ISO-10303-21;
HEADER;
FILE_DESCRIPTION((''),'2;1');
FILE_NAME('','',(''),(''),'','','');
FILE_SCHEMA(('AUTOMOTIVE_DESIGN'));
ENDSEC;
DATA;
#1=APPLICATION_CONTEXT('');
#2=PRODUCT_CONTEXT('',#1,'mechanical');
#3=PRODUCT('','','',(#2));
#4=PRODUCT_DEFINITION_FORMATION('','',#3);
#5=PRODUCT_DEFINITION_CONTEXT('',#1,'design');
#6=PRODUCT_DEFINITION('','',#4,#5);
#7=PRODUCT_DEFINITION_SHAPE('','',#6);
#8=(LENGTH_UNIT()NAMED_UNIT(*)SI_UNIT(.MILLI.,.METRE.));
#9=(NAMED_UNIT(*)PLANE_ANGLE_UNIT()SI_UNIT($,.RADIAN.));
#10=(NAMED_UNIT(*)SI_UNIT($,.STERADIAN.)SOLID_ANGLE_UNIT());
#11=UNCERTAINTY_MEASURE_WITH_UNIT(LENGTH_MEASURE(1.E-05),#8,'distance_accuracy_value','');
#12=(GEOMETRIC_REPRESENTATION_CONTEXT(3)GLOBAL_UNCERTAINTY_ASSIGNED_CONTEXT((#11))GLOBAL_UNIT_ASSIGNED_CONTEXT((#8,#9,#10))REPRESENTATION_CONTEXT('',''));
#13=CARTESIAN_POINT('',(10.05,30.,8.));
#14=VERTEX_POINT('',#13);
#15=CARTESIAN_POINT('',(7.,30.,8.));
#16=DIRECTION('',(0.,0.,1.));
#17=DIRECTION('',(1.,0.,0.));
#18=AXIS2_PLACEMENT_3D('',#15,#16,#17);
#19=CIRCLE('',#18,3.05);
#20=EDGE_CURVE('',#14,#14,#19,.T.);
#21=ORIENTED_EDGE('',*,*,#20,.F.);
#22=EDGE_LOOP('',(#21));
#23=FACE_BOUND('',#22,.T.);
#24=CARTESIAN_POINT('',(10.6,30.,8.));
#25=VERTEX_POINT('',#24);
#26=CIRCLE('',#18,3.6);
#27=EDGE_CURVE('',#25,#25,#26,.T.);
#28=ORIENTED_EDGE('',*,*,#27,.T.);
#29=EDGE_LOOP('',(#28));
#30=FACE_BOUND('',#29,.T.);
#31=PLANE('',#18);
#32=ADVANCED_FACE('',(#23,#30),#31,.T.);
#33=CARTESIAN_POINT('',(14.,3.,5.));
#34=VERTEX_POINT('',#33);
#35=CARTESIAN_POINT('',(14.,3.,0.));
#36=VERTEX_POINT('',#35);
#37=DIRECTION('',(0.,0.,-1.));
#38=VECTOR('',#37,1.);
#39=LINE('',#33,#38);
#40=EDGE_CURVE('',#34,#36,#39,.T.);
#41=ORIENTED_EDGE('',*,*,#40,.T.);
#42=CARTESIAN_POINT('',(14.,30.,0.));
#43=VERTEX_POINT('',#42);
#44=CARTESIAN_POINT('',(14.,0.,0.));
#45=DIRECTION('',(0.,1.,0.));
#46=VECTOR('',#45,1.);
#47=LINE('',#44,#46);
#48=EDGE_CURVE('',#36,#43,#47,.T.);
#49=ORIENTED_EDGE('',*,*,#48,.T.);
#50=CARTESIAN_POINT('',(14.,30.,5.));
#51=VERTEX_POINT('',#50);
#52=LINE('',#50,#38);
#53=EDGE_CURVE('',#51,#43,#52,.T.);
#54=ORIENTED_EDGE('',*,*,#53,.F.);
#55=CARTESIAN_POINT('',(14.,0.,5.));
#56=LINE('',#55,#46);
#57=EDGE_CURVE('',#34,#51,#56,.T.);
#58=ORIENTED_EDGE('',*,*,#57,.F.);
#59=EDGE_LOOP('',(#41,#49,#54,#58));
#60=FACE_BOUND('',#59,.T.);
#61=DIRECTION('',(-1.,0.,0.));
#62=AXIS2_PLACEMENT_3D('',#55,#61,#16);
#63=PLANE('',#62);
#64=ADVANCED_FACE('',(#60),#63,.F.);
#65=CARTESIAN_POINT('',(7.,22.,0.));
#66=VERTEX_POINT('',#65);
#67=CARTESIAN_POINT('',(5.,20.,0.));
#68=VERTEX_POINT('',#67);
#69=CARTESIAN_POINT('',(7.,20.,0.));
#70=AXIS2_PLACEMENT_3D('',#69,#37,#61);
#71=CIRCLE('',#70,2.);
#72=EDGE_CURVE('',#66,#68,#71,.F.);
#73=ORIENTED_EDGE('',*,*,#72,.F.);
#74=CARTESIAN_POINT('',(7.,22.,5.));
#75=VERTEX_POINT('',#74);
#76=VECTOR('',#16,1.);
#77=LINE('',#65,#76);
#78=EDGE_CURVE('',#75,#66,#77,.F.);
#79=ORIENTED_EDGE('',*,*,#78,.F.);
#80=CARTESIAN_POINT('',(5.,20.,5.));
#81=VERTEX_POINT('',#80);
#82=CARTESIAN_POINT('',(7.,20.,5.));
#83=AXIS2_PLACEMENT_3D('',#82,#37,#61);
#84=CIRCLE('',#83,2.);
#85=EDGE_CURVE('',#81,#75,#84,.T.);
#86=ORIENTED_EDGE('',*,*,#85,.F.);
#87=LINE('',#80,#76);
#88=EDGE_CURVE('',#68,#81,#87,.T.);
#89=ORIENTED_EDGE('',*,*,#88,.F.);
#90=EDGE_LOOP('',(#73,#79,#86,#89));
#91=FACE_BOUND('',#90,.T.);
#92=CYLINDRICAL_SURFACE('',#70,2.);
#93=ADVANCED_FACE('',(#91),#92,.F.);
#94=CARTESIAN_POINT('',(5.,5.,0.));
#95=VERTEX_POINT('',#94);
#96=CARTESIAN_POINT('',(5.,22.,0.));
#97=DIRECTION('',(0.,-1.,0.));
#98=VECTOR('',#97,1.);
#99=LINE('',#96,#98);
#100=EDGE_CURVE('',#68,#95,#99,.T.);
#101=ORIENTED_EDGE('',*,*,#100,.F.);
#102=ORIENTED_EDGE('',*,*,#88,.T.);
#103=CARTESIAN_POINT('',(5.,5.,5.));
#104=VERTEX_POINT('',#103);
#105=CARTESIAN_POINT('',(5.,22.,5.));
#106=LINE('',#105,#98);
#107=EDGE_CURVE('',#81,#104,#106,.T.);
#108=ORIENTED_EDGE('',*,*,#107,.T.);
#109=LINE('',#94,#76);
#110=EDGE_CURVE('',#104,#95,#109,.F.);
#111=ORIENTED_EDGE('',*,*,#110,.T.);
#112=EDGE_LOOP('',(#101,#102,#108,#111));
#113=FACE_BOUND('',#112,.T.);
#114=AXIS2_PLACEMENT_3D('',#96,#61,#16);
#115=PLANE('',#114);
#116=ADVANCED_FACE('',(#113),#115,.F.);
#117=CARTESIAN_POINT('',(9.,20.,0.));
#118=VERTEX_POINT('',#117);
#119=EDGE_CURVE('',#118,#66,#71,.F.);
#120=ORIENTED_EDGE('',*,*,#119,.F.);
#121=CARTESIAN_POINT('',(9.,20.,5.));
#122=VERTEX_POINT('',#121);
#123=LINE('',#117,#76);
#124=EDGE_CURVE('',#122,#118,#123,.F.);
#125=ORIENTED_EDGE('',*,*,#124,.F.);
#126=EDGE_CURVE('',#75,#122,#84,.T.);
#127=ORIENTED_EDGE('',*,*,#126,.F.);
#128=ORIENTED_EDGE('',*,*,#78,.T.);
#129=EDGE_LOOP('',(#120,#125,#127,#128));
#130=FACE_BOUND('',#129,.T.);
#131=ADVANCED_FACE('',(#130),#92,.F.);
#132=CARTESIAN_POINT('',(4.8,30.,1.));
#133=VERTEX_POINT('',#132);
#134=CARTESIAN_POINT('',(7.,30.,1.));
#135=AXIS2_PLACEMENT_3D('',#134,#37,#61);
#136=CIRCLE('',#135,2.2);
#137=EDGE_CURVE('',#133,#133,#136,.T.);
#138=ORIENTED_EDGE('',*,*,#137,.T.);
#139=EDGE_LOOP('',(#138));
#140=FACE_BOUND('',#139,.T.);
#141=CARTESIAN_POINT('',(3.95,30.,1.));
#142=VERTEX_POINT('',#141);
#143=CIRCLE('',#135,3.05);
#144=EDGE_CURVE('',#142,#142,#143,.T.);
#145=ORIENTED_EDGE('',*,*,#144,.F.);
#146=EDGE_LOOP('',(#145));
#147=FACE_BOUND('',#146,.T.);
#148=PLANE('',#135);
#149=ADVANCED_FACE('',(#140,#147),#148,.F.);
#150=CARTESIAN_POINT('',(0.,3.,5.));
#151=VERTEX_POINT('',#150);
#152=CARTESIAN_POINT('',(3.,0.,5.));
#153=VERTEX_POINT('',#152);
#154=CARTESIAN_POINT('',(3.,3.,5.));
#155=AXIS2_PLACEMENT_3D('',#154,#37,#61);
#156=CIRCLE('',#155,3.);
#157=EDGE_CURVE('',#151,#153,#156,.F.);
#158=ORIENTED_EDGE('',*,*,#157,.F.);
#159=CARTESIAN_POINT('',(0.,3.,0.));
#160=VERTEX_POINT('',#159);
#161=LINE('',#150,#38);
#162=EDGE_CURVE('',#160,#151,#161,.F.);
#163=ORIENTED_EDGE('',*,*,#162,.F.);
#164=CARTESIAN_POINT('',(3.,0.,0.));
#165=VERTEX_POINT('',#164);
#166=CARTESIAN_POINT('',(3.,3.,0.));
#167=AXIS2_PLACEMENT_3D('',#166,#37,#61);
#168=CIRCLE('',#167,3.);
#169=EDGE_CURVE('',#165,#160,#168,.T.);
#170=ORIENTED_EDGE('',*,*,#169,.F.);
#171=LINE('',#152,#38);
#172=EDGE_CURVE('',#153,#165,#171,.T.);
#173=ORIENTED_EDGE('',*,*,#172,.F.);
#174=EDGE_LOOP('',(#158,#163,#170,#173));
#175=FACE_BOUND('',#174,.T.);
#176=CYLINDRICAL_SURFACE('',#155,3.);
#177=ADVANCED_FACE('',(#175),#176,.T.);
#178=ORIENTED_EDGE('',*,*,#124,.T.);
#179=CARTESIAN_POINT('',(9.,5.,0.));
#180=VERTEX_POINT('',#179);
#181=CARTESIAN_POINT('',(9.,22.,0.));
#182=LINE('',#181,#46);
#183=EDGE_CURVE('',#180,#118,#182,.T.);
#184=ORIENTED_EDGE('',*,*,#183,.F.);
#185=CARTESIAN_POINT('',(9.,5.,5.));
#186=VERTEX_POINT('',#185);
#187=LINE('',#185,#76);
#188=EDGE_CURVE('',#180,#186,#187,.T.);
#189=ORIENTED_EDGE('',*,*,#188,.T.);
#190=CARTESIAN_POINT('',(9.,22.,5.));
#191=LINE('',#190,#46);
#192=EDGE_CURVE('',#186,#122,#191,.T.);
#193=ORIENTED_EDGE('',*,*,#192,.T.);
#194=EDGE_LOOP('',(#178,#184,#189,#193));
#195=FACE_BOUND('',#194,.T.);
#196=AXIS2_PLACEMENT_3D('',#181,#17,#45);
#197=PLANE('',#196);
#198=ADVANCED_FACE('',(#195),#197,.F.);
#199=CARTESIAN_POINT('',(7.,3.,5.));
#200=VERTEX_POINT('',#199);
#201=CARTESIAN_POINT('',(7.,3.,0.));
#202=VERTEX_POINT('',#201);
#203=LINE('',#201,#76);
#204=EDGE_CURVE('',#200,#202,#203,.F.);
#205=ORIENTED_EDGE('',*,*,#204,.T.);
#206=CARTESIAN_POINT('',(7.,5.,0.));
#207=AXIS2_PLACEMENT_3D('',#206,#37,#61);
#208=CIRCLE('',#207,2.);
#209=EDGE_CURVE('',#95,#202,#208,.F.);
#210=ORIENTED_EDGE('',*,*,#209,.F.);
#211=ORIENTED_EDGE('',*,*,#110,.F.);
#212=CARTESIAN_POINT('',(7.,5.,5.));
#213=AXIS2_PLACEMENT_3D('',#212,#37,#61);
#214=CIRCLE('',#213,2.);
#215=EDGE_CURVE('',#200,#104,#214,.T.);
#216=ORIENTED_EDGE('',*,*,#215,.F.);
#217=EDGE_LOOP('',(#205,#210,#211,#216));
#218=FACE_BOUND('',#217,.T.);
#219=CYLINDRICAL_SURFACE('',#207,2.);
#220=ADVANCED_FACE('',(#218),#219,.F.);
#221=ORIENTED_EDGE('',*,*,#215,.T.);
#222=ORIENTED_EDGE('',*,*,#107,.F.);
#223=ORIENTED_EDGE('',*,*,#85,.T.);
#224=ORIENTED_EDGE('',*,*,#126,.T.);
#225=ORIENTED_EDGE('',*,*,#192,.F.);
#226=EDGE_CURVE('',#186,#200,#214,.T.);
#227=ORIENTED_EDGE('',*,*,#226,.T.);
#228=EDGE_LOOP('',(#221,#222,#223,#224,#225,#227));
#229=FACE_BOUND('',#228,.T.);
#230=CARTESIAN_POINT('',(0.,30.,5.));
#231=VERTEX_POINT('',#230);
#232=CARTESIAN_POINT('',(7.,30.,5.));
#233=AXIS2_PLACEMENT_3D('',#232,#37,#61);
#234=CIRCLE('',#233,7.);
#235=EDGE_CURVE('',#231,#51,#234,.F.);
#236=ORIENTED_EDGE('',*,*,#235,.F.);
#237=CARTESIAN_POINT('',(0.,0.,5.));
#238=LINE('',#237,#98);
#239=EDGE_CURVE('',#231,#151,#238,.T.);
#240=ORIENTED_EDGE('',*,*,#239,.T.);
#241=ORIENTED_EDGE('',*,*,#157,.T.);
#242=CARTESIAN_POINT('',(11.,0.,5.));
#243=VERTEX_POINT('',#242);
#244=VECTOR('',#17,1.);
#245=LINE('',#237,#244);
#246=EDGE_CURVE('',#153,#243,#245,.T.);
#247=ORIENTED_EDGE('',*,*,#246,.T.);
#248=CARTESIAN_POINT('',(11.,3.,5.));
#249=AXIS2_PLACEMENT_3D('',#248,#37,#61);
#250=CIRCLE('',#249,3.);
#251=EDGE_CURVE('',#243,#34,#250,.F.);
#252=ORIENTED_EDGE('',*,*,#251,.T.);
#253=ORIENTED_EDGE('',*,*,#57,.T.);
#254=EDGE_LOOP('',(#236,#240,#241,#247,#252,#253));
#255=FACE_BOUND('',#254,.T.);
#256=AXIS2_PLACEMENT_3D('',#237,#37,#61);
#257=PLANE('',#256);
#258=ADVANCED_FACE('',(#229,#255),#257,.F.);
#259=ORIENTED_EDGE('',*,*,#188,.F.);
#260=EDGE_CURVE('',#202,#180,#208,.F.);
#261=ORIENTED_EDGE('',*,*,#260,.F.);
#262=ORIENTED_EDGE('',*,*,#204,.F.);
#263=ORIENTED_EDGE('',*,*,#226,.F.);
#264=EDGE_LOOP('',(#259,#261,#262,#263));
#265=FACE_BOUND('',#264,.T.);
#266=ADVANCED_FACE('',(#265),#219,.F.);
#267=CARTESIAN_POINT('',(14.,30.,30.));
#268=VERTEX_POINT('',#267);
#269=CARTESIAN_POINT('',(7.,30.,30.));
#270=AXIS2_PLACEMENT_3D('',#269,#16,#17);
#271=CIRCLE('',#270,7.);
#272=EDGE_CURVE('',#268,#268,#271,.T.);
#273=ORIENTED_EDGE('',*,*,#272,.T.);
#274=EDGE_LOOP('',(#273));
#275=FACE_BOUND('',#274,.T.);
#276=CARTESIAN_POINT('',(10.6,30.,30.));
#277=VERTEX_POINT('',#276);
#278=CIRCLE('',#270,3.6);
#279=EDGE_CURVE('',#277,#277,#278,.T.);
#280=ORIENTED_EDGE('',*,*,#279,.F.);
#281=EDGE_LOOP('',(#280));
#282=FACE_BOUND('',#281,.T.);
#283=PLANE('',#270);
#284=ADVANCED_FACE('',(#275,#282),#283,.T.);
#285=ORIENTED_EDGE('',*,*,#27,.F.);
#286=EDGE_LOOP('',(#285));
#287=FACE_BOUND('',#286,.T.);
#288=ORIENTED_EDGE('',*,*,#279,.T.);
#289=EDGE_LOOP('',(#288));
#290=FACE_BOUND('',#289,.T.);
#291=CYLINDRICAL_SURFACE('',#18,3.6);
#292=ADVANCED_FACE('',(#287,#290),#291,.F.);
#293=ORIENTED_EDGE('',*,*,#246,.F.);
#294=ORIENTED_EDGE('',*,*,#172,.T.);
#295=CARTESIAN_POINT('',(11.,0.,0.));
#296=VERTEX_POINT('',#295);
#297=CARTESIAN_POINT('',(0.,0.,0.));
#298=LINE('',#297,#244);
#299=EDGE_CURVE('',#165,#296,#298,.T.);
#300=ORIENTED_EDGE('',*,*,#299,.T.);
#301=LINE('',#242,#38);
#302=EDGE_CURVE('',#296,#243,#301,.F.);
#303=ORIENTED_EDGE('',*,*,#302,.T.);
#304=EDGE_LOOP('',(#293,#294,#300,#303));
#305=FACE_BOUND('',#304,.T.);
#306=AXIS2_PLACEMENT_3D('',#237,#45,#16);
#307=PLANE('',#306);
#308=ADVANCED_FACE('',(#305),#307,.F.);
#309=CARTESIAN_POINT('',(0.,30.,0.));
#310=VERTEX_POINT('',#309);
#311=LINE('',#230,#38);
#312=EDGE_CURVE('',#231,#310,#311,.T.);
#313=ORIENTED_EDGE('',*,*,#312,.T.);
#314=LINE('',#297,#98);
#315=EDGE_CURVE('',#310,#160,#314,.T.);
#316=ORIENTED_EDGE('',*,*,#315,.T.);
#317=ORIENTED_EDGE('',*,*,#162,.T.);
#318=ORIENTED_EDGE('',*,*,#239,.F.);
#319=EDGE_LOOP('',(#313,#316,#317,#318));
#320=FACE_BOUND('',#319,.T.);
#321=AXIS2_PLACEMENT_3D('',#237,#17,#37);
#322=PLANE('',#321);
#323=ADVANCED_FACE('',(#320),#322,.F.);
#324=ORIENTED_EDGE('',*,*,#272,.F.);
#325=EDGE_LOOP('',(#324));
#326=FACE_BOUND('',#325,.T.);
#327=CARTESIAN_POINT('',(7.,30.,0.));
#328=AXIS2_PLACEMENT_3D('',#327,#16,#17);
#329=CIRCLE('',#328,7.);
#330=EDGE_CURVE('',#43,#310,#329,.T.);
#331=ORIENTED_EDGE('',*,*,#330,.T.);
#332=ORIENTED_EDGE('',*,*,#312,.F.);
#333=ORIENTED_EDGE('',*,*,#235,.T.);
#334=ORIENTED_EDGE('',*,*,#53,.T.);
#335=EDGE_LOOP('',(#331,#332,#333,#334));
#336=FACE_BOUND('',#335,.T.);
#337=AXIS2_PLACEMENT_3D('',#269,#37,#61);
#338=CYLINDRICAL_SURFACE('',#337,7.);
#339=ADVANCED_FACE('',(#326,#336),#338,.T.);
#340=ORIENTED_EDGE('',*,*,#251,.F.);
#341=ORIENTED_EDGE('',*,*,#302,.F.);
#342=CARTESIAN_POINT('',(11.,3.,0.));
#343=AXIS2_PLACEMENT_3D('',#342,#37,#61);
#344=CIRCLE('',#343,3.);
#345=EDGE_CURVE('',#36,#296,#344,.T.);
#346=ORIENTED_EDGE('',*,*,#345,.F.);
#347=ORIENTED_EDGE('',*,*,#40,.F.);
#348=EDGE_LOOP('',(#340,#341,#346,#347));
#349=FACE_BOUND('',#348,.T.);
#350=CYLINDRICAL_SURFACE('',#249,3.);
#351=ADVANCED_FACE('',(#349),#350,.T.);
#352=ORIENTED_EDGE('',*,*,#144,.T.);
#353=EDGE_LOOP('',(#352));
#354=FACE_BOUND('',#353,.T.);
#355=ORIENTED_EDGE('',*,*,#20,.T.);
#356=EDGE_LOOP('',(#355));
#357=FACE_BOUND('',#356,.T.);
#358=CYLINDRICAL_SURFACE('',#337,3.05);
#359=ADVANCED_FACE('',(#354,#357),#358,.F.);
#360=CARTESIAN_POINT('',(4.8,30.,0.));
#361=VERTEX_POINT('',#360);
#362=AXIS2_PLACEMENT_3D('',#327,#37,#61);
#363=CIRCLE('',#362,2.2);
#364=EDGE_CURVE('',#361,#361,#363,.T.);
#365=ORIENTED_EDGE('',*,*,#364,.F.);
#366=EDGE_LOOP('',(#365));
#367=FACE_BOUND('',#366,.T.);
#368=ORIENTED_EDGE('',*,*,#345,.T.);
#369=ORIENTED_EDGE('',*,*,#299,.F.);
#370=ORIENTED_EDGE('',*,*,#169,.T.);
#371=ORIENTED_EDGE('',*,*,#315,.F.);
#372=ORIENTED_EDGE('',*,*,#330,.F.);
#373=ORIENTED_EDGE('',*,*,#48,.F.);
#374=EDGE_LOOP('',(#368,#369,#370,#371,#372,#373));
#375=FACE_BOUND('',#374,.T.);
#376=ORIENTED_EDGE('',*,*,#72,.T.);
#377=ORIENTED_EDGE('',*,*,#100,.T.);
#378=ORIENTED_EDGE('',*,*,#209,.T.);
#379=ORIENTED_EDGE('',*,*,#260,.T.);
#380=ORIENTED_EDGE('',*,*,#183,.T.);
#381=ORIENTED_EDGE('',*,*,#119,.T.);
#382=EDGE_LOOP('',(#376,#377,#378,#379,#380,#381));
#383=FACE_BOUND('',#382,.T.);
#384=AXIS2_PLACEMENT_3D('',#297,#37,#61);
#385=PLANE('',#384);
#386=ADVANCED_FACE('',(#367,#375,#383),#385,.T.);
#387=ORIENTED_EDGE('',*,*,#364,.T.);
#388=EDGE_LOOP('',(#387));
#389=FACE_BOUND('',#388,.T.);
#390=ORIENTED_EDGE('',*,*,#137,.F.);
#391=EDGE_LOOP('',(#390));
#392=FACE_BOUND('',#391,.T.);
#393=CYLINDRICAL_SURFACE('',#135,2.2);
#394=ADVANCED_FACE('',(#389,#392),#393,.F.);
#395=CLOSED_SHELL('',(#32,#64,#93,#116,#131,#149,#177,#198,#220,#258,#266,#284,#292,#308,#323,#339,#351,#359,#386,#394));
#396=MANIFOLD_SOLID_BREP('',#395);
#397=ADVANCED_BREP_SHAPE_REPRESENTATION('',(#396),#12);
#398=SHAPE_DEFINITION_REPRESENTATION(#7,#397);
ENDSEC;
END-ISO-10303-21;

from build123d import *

# Parameters (mm, degrees)
SZKIC1_W                    = 14
SZKIC1_H                    = 25
DODANIE_WYCI_GNI_CIE1_DEPTH = 5
SZKIC2_W                    = 4
SZKIC2_H                    = 19
WYTNIJ_WYCI_GNI_CIE1_DEPTH  = 5
ZAOKR_GLENIE1_R             = 2
ZAOKR_GLENIE2_R             = 3
SZKIC3_R                    = 7
SZKIC3_R_2                  = 3.05
DODANIE_WYCI_GNI_CIE2_DEPTH = 30
DODANIE_WYCI_GNI_CIE3_DEPTH = 5
SZKIC5_R                    = 5
SZKIC5_R_2                  = 2.2
DODANIE_WYCI_GNI_CIE4_DEPTH = 1
SZKIC6_R                    = 3.6
WYTNIJ_WYCI_GNI_CIE2_DEPTH  = 22


with BuildPart() as part:
    # Szkic1 → Dodanie-wyciągnięcie1 (new body)
    with BuildSketch(Plane.XY):
        with Locations((7, 12.5)):
            Rectangle(SZKIC1_W, SZKIC1_H)
    extrude(amount=DODANIE_WYCI_GNI_CIE1_DEPTH)

    # Szkic2 → Wytnij-wyciągnięcie1 (cut)
    with BuildSketch(Plane.XY.offset(5)):
        with Locations((7, 12.5)):
            Rectangle(SZKIC2_W, SZKIC2_H)
    extrude(amount=-WYTNIJ_WYCI_GNI_CIE1_DEPTH, mode=Mode.SUBTRACT)

    # Zaokrąglenie1
    zaokr_glenie1_edges = [part.edges().sort_by_distance(p)[0] for p in [
        (5, 3, 2.5),
        (9, 3, 2.5),
        (9, 22, 2.5),
        (5, 22, 2.5),
    ]]
    fillet(zaokr_glenie1_edges, radius=ZAOKR_GLENIE1_R - 0.0001)  # a hair under: the kernel refuses the full size

    # Zaokrąglenie2
    zaokr_glenie2_edges = [part.edges().sort_by_distance(p)[0] for p in [
        (14, 0, 2.5),
        (0, 0, 2.5),
    ]]
    fillet(zaokr_glenie2_edges, radius=ZAOKR_GLENIE2_R)

    # Szkic3 → Dodanie-wyciągnięcie2 (add)
    with BuildSketch(Plane.XY):
        with Locations(Location((7, 30, 0), (0, 0, 225.584691403))):
            Circle(SZKIC3_R)
        with Locations((7, 30)):
            Circle(SZKIC3_R_2, mode=Mode.SUBTRACT)
    extrude(amount=DODANIE_WYCI_GNI_CIE2_DEPTH)

    # Szkic4 → Dodanie-wyciągnięcie3 (add)
    with BuildSketch(Plane(origin=(0, 0, 0), x_dir=(-1, 0, 0), z_dir=(0, 0, -1))):
        Polygon((-14, 25), (-14, 30), (-11.004847048, 25), align=None)
        Polygon((-2.101020514, 25), (0, 30), (0, 25), align=None)
    extrude(amount=-DODANIE_WYCI_GNI_CIE3_DEPTH)

    # Szkic5 → Dodanie-wyciągnięcie4 (add)
    with BuildSketch(Plane(origin=(0, 0, 0), x_dir=(-1, 0, 0), z_dir=(0, 0, -1))):
        with Locations((-7, 30)):
            Circle(SZKIC5_R)
        with Locations((-7, 30)):
            Circle(SZKIC5_R_2, mode=Mode.SUBTRACT)
    extrude(amount=-DODANIE_WYCI_GNI_CIE4_DEPTH)

    # Szkic6 → Wytnij-wyciągnięcie2 (cut)
    with BuildSketch(Plane.XY.offset(30)):
        with Locations((7, 30)):
            Circle(SZKIC6_R)
    extrude(amount=-WYTNIJ_WYCI_GNI_CIE2_DEPTH, mode=Mode.SUBTRACT)


solid = part.part
